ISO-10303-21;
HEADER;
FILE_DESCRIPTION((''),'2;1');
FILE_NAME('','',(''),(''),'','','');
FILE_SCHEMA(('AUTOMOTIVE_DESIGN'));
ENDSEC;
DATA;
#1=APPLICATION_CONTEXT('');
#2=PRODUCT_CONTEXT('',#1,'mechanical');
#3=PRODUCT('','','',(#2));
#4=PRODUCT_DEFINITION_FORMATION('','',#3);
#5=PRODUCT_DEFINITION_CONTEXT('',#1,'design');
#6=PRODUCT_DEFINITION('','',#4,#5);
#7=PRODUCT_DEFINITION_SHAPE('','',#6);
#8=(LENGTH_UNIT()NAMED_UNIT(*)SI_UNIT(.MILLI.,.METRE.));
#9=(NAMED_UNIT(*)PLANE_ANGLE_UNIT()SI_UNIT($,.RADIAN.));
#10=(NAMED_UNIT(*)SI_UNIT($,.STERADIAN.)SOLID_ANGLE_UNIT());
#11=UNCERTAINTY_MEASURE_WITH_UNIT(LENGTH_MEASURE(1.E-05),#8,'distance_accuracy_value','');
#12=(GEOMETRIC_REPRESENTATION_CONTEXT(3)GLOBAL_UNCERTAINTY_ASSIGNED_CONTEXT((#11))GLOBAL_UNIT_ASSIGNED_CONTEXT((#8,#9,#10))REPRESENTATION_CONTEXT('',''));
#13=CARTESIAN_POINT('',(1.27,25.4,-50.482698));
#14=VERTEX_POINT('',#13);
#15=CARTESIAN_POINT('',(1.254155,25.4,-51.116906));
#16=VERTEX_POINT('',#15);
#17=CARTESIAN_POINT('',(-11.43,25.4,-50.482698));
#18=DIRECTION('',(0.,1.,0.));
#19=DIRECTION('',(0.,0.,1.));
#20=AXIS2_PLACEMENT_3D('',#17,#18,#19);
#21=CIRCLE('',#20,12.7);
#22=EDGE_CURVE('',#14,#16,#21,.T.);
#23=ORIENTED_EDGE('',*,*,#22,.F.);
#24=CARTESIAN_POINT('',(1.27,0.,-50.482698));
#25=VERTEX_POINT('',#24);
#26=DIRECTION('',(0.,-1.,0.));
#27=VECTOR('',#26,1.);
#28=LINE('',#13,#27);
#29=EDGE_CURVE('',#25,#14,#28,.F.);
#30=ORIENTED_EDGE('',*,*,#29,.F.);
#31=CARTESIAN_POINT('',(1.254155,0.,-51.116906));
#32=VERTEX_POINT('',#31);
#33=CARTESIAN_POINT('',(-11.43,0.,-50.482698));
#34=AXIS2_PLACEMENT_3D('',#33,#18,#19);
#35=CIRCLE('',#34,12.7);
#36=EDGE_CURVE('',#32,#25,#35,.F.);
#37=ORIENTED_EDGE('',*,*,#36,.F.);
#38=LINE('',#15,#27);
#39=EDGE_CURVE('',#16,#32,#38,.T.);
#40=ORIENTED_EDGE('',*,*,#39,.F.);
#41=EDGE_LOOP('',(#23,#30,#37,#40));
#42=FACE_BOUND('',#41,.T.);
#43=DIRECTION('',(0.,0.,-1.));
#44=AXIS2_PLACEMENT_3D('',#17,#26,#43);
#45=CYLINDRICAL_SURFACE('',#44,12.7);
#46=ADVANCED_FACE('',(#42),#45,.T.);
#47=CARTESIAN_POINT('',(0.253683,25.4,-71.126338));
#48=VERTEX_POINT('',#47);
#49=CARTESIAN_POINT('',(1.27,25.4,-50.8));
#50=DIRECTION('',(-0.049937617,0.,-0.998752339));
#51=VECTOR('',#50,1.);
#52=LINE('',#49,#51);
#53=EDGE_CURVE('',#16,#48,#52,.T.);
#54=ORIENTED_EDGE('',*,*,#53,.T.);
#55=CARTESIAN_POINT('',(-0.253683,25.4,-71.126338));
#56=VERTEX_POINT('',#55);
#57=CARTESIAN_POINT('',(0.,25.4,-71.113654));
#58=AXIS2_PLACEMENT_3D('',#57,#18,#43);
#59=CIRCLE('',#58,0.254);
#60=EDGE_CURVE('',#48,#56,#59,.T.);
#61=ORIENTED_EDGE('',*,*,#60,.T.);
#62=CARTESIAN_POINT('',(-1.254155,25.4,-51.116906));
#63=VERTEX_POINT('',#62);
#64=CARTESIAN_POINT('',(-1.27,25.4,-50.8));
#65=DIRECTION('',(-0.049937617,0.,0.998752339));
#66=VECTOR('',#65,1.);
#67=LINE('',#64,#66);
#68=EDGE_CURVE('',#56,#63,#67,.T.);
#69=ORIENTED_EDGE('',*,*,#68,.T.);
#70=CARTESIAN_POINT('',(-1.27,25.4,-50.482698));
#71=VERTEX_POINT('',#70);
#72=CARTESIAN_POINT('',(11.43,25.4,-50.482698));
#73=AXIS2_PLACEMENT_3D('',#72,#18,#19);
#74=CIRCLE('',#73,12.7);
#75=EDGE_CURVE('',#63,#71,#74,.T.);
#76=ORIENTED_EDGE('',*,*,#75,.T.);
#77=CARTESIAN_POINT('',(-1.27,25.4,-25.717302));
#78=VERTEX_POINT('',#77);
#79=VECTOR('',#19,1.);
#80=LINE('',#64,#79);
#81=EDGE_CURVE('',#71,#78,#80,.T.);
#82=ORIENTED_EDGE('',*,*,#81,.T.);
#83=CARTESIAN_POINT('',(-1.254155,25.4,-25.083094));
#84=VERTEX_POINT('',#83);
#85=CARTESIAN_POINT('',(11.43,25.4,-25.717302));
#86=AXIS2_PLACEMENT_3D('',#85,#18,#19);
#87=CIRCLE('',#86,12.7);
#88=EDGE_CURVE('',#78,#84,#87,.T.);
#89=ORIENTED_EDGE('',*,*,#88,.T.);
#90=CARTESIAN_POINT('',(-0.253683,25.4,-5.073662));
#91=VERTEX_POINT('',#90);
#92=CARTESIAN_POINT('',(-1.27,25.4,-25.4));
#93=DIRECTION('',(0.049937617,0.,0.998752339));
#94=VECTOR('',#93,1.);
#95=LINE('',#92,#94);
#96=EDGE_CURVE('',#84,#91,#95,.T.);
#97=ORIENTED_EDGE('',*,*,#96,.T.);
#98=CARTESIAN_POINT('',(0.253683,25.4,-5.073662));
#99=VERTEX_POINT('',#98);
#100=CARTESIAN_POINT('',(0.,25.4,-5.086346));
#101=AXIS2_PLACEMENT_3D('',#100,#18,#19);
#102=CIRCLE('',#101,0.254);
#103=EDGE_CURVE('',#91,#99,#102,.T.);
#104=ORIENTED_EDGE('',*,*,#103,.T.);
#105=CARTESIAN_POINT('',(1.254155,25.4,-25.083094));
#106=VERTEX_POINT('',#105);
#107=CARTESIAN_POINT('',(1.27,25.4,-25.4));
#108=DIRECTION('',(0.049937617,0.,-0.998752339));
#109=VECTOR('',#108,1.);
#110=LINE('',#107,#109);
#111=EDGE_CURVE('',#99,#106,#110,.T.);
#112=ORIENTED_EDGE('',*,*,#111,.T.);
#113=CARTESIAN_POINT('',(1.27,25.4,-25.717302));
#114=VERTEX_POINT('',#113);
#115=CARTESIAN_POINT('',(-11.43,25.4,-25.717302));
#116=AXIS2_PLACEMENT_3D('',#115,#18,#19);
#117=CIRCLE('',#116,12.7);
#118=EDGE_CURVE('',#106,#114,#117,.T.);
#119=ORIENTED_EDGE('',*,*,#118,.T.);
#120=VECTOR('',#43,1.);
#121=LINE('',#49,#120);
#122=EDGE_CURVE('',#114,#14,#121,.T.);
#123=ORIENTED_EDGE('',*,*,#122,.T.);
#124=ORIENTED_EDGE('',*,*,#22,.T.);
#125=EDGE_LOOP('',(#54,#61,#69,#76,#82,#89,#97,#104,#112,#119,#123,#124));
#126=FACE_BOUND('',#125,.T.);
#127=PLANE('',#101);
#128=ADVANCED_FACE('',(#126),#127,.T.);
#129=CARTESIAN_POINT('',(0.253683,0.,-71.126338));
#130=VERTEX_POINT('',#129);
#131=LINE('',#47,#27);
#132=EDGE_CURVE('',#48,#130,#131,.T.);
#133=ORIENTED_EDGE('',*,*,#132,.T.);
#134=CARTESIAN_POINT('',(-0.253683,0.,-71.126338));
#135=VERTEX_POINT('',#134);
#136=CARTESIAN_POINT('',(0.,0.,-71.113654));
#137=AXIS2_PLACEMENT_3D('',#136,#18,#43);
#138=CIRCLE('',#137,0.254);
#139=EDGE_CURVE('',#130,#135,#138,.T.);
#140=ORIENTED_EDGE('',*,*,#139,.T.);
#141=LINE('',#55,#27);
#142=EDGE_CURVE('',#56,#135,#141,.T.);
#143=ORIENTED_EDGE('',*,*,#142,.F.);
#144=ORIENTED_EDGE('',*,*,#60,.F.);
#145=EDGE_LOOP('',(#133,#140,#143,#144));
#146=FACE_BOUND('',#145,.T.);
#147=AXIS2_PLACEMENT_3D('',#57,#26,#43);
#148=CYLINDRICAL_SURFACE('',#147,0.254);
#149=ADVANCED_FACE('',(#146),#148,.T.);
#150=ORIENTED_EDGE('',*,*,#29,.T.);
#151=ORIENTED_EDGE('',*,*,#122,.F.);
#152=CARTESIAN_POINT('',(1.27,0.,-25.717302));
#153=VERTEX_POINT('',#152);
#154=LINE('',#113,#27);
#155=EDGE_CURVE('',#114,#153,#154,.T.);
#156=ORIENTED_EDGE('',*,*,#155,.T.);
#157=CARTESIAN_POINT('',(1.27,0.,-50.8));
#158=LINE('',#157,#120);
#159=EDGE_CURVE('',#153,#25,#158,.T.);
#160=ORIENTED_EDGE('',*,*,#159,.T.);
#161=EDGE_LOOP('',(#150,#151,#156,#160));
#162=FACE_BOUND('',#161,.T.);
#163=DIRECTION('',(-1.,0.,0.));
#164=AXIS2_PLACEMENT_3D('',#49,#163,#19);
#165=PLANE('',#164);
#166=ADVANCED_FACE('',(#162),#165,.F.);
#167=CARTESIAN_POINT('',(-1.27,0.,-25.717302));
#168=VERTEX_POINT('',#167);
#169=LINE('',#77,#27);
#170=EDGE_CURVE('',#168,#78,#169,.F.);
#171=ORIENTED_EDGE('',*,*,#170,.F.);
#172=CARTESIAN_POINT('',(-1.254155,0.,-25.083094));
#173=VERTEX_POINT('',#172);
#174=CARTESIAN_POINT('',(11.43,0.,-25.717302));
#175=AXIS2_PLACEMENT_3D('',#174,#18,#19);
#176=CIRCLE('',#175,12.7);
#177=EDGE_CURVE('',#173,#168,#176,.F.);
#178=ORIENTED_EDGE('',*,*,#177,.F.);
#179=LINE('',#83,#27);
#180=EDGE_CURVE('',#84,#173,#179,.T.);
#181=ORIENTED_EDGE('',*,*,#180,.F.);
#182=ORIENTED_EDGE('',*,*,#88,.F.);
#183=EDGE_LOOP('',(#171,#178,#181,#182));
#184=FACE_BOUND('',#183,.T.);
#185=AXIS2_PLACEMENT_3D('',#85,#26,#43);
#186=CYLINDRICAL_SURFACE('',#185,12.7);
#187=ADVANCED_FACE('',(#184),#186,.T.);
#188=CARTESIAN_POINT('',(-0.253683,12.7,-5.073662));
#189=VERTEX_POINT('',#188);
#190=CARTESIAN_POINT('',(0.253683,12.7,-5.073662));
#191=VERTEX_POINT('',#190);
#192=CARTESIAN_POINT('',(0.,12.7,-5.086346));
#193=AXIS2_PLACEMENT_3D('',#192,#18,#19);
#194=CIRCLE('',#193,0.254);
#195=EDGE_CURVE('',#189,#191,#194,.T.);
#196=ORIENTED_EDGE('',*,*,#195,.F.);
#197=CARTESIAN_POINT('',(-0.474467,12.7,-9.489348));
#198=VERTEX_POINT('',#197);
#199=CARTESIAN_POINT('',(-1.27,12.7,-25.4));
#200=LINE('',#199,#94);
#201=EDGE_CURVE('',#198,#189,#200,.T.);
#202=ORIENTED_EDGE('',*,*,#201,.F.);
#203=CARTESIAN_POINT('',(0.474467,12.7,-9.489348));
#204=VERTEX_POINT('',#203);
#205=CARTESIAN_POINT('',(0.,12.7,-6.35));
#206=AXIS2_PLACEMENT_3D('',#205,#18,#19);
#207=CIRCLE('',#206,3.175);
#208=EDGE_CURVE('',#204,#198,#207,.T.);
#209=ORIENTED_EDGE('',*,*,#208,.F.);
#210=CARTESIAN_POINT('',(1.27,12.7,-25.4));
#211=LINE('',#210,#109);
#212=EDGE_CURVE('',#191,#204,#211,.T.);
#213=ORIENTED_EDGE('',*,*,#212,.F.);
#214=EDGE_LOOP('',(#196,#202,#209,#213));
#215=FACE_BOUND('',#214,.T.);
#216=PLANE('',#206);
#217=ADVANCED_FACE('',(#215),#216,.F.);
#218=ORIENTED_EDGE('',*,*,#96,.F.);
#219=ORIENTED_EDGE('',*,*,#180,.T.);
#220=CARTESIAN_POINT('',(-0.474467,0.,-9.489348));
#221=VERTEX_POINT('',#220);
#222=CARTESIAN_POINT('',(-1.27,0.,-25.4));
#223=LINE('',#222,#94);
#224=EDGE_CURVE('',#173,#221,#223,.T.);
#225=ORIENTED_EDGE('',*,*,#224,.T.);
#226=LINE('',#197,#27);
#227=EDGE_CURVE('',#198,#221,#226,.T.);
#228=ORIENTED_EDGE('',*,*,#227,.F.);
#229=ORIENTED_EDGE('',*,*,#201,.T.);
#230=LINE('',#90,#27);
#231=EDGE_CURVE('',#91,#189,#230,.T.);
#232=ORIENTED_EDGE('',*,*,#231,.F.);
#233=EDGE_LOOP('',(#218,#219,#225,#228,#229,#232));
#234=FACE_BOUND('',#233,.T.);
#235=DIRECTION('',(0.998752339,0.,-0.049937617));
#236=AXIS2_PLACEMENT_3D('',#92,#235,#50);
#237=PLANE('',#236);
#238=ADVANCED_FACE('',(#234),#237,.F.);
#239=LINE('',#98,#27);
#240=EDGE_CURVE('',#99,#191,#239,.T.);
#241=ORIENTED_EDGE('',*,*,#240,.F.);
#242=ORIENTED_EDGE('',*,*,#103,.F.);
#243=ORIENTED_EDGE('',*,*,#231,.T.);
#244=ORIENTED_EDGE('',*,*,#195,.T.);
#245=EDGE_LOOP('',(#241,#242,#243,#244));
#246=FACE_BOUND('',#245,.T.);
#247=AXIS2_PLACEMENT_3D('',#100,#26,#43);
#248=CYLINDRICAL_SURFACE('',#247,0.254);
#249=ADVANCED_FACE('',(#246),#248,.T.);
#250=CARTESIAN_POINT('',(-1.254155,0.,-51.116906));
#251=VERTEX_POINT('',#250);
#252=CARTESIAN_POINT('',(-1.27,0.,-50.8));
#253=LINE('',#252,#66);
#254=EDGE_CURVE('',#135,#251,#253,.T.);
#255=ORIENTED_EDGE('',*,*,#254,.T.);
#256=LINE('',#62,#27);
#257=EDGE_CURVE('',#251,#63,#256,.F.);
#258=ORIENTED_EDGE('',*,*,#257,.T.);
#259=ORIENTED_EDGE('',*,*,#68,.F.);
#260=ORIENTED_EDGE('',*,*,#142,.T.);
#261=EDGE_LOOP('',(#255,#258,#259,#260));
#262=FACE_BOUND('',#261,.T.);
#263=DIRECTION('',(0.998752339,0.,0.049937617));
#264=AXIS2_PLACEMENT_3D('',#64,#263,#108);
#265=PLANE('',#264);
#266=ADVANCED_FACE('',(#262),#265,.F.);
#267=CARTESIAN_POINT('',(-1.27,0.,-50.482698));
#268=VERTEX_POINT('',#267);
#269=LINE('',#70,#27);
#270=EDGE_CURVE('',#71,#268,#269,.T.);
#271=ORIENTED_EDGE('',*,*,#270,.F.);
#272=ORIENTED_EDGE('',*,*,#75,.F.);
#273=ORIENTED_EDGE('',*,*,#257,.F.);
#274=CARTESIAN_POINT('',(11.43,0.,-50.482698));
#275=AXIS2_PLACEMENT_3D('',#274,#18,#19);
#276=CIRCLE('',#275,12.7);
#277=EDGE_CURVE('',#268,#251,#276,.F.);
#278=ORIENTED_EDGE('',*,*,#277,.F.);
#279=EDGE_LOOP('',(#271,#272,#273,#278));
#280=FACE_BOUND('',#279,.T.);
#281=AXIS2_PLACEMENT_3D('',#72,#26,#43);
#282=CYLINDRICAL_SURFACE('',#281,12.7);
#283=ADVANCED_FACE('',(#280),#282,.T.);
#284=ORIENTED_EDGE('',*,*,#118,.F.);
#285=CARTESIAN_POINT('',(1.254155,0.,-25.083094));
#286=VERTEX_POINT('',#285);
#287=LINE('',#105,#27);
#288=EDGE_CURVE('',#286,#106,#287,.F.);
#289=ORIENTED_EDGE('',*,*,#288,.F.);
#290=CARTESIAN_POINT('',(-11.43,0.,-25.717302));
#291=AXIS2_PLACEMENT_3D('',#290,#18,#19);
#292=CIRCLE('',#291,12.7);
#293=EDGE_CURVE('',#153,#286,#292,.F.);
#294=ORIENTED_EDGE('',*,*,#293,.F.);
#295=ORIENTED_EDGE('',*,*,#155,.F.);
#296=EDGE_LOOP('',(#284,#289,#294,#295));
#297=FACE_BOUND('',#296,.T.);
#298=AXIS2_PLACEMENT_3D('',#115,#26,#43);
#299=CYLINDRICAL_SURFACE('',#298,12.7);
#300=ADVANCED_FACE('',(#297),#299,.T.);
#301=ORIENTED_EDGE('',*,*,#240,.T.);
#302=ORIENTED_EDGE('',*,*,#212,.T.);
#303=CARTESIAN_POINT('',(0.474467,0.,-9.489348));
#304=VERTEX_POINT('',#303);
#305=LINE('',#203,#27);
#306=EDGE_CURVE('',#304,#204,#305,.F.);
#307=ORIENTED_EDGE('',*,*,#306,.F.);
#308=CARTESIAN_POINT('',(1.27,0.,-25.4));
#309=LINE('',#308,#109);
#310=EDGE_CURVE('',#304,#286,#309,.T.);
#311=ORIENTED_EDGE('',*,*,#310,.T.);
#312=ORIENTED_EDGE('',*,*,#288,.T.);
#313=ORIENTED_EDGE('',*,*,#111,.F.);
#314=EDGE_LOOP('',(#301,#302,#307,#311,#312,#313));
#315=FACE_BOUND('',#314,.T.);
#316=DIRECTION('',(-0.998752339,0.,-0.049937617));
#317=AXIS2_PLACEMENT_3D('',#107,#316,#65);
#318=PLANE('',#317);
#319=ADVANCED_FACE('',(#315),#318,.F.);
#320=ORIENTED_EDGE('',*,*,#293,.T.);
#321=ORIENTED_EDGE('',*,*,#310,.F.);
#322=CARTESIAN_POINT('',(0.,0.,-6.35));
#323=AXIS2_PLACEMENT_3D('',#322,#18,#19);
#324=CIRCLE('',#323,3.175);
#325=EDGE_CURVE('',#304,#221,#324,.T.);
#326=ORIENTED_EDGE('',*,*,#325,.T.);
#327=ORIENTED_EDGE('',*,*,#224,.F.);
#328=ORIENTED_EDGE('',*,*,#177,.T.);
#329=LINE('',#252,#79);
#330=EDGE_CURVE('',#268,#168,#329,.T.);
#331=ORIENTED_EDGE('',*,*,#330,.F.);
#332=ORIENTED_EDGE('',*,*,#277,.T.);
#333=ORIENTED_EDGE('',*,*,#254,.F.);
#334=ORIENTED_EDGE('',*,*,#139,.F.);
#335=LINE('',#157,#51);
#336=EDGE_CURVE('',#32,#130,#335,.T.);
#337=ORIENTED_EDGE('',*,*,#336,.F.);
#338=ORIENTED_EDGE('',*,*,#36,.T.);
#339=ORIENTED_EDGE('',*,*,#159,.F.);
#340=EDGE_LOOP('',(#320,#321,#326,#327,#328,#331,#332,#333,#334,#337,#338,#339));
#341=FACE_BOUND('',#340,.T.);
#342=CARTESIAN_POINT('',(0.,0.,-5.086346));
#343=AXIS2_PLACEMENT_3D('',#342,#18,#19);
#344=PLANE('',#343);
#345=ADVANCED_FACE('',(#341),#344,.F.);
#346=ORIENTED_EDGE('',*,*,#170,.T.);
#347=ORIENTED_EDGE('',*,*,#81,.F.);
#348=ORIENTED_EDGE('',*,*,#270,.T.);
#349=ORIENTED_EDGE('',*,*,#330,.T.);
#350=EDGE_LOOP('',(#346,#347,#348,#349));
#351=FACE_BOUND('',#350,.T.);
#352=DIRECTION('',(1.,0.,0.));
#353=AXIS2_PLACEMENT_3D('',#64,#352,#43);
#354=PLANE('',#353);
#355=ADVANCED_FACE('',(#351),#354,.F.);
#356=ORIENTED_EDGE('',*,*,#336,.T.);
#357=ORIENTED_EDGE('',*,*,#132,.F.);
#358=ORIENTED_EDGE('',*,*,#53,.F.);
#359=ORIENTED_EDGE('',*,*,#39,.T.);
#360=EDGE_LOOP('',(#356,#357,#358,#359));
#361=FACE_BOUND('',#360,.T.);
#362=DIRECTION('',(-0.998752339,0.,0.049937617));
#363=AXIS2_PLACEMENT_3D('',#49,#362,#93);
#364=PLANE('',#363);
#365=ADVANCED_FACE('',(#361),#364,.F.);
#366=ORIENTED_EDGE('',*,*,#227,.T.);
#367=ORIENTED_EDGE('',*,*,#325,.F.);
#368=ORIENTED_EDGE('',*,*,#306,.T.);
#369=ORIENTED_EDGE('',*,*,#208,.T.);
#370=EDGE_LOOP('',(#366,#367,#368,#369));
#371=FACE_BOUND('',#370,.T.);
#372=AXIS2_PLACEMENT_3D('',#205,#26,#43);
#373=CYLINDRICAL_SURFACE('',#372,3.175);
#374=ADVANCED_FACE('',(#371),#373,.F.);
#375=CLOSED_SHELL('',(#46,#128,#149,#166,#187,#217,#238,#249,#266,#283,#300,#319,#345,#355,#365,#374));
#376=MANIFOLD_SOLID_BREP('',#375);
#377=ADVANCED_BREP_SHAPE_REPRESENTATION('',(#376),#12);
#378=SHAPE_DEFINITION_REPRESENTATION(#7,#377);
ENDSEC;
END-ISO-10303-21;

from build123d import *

# Parameters (mm, degrees)
BOSS_EXTRUDE1_DEPTH = 25.4
FILLET1_R           = 12.7
SKETCH4_R           = 3.175
CUT_EXTRUDE2_DEPTH  = 12.7


with BuildPart() as part:
    # Sketch1 → Boss-Extrude1 (new body)
    with BuildSketch(Plane(origin=(0, 0, 0), x_dir=(1, 0, 0), z_dir=(0, 1, 0))):
        with BuildLine():
            Line((-1.27, 50.8), (-1.27, 25.4))
            Line((-1.27, 25.4), (-0.253683094, 5.073661881))
            ThreePointArc((-0.253683094, 5.073661881), (0, 4.832346036), (0.253683094, 5.073661881))
            Line((0.253683094, 5.073661881), (1.27, 25.4))
            Line((1.27, 25.4), (1.27, 50.8))
            Line((1.27, 50.8), (0.253683094, 71.126338119))
            ThreePointArc((0.253683094, 71.126338119), (0, 71.367653964), (-0.253683094, 71.126338119))
            Line((-0.253683094, 71.126338119), (-1.27, 50.8))
        make_face()
    extrude(amount=BOSS_EXTRUDE1_DEPTH)

    # Fillet1
    # the kernel refuses this fillet: 12.7 mm, written as the material it takes off along each edge
    with BuildSketch(Plane(origin=(-1.27, -0.793254525, -25.4), x_dir=(0, 0, -1), z_dir=(0, 1, 0)), Plane(origin=(-1.27, -0.793254525, -50.8), x_dir=(0.04993761694389363, 0, -0.9987523388778445), z_dir=(0, 1, 0)), Plane(origin=(1.27, -0.793254525, -50.8), x_dir=(0, 0, 1), z_dir=(0, 1, 0)), Plane(origin=(1.27, -0.793254525, -25.4), x_dir=(-0.04993761694389503, 0, 0.9987523388778445), z_dir=(0, 1, 0))) as fillet1_piece_1:
        with BuildLine():
            CenterArc((FILLET1_R * 0.0249843945008, -FILLET1_R), FILLET1_R, 90, 2.862405226)
            Line((-FILLET1_R * 0.0249532224431, -FILLET1_R * 0.00124766112216), (0, 0))
            Line((0, 0), (FILLET1_R * 0.0249843945008, 0))
        make_face()
    extrude(amount=26.986509051, mode=Mode.SUBTRACT)

    # Sketch4 → Cut-Extrude2 (cut)
    with BuildSketch(Plane(origin=(0, 0, 0), x_dir=(1, 0, 0), z_dir=(0, 1, 0))):
        with Locations((0, 6.35)):
            Circle(SKETCH4_R)
    extrude(amount=CUT_EXTRUDE2_DEPTH, mode=Mode.SUBTRACT)


solid = part.part
